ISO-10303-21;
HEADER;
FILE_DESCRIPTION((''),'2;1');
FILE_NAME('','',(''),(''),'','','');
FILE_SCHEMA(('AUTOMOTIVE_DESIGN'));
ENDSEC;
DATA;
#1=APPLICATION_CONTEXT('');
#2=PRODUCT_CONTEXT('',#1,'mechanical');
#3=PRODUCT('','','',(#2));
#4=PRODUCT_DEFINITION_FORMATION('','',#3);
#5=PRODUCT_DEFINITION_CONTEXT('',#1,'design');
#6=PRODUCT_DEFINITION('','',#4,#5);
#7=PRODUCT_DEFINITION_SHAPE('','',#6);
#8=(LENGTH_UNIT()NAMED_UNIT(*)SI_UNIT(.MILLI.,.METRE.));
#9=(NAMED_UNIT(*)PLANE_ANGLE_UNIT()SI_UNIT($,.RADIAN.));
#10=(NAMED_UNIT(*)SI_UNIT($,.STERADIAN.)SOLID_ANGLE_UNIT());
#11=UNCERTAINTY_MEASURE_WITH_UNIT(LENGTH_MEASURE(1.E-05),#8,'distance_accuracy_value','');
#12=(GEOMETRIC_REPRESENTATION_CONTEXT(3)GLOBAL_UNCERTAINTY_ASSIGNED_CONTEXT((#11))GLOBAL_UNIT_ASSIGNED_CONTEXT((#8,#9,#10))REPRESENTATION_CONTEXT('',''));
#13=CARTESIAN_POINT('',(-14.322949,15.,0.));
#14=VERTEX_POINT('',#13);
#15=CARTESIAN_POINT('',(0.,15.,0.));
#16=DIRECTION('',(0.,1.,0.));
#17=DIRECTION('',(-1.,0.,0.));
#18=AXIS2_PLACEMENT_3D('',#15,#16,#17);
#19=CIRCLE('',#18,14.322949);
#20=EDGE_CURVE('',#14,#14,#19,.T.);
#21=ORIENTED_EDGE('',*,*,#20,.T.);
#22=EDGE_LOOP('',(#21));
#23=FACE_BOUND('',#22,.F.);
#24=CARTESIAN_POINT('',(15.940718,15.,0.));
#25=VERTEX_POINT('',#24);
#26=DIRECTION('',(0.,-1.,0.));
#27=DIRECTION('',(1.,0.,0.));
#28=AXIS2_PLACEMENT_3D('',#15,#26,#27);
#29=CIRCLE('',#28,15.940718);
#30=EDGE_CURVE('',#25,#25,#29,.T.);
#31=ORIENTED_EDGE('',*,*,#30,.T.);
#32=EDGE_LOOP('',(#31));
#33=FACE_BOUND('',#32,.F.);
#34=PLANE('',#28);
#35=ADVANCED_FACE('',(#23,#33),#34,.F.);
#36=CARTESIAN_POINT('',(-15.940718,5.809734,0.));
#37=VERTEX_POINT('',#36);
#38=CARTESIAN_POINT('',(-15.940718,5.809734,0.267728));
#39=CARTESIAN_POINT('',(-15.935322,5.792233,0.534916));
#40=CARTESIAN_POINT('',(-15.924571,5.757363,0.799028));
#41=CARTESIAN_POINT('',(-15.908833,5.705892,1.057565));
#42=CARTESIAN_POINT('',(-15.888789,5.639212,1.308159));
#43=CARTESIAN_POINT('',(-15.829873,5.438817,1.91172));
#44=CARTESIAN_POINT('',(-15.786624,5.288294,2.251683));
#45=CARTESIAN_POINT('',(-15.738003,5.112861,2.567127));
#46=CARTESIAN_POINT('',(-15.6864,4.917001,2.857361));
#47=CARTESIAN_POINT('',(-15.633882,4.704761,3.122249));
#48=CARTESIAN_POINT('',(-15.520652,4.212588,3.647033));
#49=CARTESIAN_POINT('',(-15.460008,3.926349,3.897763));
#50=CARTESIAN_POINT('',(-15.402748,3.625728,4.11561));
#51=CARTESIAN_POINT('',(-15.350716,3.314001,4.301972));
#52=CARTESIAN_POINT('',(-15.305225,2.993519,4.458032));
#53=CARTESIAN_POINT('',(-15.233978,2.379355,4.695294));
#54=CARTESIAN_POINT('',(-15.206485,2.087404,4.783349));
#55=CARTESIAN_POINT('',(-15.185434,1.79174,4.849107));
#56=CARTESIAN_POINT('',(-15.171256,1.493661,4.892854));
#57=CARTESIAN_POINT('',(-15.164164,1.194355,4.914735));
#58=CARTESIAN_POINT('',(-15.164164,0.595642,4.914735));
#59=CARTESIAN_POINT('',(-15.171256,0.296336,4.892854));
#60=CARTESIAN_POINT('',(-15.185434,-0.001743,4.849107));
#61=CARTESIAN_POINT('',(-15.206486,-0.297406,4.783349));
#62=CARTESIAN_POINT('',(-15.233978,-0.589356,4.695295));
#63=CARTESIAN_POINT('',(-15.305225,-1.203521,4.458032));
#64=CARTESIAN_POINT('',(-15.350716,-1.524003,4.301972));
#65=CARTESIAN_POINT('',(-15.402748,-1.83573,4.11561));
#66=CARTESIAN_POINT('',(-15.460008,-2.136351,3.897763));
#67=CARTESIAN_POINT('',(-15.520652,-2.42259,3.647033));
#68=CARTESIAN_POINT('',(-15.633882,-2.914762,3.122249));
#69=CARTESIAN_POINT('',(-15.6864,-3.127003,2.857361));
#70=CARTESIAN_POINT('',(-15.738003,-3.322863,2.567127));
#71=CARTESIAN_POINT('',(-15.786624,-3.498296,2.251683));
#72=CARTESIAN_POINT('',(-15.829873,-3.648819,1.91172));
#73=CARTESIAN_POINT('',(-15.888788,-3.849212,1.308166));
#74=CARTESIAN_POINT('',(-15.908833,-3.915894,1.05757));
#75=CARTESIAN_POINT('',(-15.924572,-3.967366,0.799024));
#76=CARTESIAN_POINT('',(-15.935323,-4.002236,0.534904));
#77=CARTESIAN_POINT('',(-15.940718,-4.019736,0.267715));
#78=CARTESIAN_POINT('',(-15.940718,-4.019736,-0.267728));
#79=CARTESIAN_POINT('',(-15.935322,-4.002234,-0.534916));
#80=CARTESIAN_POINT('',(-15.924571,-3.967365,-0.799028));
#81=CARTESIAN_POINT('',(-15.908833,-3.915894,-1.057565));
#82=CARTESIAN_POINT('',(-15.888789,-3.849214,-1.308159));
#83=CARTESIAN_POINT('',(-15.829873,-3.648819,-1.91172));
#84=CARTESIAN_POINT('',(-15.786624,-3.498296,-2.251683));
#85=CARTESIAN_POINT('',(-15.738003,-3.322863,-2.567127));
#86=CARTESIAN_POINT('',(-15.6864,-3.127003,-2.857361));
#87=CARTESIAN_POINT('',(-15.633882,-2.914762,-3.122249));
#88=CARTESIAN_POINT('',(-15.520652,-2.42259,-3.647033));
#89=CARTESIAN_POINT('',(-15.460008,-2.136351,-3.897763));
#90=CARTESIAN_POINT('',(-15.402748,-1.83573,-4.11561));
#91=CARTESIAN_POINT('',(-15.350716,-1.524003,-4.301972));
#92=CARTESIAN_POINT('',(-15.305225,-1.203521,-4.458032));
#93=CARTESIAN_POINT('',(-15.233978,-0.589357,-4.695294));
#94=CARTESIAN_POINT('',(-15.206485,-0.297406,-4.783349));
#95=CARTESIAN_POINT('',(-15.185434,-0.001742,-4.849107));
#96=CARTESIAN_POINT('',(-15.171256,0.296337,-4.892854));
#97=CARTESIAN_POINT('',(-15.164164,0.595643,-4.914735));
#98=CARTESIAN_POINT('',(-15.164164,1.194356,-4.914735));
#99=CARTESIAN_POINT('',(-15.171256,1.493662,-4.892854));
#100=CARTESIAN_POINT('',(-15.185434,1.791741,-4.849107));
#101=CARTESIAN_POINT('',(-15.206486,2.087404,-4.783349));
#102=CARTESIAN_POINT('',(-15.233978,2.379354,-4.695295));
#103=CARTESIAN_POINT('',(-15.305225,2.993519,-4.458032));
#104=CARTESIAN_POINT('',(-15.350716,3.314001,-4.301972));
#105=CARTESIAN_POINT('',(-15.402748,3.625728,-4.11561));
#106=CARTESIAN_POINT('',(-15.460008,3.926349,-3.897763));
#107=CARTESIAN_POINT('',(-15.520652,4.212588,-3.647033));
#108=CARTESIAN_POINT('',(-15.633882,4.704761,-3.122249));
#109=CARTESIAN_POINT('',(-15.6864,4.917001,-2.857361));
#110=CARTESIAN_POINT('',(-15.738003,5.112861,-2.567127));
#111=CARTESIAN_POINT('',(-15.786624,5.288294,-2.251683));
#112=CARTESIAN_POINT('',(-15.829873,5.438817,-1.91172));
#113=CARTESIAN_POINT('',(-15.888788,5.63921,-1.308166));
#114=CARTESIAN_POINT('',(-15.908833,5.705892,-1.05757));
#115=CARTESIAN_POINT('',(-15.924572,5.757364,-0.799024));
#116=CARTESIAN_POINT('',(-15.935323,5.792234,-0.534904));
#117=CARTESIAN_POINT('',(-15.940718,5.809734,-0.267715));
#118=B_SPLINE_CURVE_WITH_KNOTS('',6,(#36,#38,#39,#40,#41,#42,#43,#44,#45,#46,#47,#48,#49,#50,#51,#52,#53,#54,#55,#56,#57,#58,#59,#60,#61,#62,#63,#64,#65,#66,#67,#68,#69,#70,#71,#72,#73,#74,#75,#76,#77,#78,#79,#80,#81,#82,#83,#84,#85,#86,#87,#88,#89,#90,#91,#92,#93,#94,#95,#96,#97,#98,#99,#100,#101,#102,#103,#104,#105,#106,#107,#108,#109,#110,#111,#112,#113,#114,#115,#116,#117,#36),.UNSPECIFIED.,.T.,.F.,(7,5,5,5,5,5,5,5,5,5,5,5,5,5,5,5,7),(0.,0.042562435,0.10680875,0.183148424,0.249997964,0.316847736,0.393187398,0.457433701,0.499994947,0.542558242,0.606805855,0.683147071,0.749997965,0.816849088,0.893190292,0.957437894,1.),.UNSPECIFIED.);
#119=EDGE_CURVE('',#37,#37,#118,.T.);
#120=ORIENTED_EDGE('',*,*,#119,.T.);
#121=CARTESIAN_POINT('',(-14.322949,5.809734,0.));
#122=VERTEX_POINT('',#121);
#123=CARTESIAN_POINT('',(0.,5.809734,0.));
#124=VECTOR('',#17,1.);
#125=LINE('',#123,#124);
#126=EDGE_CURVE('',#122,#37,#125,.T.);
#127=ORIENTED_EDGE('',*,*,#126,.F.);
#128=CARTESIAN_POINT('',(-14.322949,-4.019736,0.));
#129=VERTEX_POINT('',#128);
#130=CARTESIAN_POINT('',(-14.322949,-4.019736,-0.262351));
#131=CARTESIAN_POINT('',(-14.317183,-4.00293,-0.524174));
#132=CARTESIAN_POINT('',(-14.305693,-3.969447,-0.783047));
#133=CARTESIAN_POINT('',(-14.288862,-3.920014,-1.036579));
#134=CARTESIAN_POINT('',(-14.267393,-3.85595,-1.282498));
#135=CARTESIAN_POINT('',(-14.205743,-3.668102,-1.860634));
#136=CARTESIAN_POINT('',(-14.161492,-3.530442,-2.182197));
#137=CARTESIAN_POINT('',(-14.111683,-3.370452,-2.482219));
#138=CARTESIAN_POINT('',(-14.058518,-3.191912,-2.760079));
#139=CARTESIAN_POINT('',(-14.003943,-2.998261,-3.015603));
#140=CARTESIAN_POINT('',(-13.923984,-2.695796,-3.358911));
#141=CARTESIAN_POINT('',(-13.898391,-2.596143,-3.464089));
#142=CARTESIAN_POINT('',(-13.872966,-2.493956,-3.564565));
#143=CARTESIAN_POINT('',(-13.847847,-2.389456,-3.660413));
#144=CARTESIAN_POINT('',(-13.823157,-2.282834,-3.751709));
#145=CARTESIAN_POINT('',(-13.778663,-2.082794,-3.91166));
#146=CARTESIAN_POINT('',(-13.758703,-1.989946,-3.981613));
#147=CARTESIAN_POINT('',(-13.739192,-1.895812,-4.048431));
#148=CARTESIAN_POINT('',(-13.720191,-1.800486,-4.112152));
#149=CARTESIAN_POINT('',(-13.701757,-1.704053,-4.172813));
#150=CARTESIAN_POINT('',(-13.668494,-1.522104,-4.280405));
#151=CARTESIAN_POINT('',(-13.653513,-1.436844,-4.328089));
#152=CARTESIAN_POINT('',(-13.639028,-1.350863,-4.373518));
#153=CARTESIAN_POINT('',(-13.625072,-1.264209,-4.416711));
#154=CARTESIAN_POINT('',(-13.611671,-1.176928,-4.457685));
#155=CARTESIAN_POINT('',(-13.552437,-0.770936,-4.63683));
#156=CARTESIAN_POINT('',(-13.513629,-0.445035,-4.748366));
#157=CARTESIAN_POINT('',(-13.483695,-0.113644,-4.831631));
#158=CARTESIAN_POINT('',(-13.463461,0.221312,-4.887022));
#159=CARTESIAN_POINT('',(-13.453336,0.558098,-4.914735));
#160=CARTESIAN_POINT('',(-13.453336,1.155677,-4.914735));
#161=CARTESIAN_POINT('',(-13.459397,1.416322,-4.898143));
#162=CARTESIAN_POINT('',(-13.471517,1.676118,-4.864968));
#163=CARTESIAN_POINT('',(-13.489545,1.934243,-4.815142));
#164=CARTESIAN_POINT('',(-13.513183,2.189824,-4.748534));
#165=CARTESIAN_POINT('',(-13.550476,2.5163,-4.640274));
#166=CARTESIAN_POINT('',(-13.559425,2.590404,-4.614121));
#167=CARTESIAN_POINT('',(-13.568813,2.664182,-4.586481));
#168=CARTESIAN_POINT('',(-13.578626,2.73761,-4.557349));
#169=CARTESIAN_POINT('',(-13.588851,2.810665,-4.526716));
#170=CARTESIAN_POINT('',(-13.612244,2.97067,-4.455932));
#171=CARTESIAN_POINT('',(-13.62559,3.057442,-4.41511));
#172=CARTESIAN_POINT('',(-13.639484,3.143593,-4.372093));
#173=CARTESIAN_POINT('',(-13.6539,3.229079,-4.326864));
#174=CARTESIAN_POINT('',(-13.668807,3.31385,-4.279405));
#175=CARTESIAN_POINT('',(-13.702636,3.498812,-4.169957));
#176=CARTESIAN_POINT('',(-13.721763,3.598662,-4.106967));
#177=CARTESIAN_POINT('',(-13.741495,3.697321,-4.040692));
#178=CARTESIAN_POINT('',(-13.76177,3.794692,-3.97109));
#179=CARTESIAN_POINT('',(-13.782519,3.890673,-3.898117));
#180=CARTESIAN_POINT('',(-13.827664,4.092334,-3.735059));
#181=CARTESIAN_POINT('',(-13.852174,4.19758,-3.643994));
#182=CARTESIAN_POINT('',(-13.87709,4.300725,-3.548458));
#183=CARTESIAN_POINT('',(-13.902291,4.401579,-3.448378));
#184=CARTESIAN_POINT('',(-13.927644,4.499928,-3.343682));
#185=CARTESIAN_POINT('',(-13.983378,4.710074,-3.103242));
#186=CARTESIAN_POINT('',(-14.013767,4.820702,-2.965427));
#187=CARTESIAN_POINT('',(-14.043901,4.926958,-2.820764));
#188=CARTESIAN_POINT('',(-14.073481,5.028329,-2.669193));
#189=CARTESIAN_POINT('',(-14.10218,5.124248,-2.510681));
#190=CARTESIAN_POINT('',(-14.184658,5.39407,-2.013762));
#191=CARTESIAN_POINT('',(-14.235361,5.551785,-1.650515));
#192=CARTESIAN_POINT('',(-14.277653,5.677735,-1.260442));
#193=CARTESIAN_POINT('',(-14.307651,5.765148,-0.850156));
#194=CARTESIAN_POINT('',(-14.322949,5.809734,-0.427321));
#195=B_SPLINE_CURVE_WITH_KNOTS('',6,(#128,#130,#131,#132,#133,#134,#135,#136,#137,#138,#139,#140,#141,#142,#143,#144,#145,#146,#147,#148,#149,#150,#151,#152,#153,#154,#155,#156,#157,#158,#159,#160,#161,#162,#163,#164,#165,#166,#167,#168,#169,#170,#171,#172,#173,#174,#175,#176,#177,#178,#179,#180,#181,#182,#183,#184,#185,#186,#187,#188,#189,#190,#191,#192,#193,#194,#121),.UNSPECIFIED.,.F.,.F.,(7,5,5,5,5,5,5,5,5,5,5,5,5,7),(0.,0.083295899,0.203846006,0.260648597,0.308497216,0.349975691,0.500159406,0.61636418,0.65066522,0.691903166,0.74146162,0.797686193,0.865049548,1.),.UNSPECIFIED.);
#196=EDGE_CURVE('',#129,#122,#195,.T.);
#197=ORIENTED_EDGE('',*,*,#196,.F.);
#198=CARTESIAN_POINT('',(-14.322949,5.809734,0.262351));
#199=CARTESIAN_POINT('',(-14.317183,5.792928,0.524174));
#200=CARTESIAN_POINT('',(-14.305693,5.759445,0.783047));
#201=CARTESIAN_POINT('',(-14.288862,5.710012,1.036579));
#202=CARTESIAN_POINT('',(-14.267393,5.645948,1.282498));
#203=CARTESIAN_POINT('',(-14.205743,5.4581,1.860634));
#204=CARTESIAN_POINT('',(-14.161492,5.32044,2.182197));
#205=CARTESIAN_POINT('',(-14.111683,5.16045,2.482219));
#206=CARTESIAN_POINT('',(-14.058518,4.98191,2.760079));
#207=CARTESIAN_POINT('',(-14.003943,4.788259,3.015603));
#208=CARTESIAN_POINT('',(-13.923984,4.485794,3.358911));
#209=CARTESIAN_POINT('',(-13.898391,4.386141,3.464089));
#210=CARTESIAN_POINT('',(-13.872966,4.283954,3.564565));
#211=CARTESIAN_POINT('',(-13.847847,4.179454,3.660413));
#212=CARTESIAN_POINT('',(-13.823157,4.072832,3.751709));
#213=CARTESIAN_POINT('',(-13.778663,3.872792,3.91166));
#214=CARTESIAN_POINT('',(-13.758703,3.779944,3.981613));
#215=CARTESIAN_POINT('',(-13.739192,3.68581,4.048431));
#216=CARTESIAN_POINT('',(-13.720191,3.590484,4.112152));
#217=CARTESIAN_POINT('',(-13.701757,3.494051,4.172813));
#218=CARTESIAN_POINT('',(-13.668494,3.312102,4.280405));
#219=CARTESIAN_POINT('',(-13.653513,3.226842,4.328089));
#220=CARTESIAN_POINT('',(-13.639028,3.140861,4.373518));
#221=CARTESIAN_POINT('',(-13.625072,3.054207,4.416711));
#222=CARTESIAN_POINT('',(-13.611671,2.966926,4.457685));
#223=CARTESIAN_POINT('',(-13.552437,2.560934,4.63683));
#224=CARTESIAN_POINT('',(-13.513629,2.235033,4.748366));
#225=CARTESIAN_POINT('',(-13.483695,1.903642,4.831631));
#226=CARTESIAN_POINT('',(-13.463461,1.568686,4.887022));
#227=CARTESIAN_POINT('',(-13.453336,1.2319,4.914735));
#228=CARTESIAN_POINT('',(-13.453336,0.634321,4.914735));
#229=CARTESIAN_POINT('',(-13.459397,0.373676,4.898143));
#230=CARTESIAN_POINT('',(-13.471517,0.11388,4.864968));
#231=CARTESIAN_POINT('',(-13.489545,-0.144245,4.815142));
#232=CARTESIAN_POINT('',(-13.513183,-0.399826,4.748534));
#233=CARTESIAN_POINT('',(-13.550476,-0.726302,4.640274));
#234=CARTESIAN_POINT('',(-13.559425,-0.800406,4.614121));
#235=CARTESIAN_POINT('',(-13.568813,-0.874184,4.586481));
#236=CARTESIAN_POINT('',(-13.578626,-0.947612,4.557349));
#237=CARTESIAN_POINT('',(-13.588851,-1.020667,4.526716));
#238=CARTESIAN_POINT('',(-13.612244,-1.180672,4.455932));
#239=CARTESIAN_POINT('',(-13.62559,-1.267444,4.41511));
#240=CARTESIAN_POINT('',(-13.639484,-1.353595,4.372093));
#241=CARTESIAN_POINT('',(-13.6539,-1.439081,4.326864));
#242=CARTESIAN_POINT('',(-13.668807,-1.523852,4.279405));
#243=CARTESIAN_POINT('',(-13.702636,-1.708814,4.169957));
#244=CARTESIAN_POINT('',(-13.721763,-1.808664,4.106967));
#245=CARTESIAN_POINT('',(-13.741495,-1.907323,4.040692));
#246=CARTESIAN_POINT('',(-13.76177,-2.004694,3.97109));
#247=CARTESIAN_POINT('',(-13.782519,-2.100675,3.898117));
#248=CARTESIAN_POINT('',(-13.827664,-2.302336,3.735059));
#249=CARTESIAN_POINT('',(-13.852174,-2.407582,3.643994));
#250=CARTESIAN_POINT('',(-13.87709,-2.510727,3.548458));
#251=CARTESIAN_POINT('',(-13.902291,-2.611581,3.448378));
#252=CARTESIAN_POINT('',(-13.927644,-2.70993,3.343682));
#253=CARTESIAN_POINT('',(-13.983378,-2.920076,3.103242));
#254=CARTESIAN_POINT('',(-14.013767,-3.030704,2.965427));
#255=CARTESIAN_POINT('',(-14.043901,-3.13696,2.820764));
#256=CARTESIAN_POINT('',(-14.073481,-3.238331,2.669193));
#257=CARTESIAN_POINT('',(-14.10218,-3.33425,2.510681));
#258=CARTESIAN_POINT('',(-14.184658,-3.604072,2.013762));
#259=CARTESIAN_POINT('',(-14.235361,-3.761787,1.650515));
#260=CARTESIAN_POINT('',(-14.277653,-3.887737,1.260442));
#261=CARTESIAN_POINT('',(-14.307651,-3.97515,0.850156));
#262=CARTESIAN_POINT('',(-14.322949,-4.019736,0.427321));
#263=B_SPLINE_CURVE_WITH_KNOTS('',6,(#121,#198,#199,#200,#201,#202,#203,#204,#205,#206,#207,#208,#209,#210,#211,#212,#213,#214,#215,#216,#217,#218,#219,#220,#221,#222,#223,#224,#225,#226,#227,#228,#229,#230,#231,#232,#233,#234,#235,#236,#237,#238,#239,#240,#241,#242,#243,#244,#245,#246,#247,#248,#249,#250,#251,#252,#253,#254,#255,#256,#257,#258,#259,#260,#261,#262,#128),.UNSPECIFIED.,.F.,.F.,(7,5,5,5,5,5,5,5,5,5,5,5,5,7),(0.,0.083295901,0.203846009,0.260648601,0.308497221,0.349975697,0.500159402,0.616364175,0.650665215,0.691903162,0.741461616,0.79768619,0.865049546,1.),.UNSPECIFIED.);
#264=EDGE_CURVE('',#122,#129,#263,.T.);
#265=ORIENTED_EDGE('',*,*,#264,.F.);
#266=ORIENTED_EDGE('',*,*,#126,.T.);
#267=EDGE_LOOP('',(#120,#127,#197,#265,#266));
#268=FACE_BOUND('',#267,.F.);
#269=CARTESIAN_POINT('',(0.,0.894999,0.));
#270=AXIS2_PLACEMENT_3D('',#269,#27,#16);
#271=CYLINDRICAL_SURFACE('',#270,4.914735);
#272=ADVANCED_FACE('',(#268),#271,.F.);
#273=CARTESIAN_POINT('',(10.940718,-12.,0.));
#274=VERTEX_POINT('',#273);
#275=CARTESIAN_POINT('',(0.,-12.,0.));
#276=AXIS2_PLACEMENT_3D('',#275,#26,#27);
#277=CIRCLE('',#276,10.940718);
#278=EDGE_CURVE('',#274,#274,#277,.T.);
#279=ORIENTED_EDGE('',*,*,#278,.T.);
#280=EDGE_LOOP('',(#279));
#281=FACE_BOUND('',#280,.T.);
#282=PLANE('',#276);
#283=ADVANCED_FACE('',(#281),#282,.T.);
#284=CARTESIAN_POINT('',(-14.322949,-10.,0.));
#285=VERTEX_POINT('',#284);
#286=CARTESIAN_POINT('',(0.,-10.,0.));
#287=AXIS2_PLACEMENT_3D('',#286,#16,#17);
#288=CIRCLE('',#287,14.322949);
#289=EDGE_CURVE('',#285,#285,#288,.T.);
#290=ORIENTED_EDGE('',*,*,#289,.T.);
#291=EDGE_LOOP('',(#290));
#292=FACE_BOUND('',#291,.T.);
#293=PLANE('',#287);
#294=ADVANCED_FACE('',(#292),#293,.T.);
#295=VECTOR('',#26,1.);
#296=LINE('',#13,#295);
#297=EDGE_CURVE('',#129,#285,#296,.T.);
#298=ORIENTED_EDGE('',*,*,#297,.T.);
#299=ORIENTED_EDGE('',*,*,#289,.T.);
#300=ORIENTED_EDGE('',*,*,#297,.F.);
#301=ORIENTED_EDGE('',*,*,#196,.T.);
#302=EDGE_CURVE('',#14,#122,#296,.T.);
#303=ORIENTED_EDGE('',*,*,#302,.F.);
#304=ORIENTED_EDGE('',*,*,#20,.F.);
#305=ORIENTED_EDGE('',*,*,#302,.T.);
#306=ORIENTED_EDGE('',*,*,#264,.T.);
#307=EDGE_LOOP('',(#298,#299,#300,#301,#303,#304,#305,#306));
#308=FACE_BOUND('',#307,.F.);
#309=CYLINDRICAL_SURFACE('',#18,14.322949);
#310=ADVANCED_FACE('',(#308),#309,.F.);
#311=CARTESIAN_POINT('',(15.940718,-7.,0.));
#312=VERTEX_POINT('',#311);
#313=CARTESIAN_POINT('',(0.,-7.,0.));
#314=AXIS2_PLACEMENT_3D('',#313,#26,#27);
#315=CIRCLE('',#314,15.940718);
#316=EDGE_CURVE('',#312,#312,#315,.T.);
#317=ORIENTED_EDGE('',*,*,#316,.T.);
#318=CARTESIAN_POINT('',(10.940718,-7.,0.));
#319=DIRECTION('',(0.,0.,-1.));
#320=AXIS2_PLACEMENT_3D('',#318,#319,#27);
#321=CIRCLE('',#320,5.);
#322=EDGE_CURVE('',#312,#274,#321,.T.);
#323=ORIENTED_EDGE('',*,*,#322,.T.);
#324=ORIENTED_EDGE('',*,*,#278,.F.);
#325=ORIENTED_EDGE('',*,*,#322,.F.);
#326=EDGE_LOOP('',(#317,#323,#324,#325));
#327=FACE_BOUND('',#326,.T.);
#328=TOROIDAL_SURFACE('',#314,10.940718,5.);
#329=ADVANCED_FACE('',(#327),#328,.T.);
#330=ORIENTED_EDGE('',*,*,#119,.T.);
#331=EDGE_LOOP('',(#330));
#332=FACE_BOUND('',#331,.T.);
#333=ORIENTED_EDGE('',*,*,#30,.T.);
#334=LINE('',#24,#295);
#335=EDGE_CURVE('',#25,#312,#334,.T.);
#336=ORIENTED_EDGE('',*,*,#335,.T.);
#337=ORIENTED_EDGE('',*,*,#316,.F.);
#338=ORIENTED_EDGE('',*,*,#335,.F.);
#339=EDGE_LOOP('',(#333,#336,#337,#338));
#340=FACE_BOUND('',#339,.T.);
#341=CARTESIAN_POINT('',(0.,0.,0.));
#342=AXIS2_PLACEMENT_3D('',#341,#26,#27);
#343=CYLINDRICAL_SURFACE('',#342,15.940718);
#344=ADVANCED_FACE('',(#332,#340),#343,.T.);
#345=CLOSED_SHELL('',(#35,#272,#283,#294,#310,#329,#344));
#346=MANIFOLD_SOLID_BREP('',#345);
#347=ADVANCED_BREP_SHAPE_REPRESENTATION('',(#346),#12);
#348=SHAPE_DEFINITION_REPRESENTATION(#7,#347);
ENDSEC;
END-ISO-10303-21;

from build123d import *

# Parameters (mm, degrees)
F0_R     = 15.9407183273
F2_DEPTH = 12
F1_R     = 14
F3_DEPTH = 53
F4_DEPTH = 15
F5_R     = 14.3229491525
F6_DEPTH = 25
F7_R     = 5
F8_R     = 4.9147347868
F9_DEPTH = 15.9417183273


# Not quite as in the source:
# - an extrude ends at something that could not be found from the text; its depth is read off the source's solid


with BuildPart() as f2:
    # F0 (on Front) → F2 (new body)
    with BuildSketch(Plane.XZ):
        Circle(F0_R)
    extrude(amount=F2_DEPTH)

    # F1 (on face) → F3 (cut, through all)
    with BuildSketch(Plane.XZ):
        Circle(F1_R)
    extrude(amount=-F3_DEPTH, mode=Mode.SUBTRACT)

    # F4 (add): a face of the model
    f4_faces = [f2.faces().sort_by_distance(p)[0] for p in [
        (0, 0, 0),
    ]]
    extrude(f4_faces, amount=F4_DEPTH)

    # F5 (on face) → F6 (cut)
    with BuildSketch(Plane(origin=(0, 15, 0), x_dir=(-1, 0, 0), z_dir=(0, 1, 0))):
        Circle(F5_R)
    extrude(amount=-F6_DEPTH, mode=Mode.SUBTRACT)

    # F7
    f7_edges = [f2.edges().sort_by_distance(p)[0] for p in [
        (-15.940718, -12, 0),
    ]]
    fillet(f7_edges, radius=F7_R)

    # F8 (on Right) → F9 (cut, through all)
    with BuildSketch(Plane.YZ):
        with Locations((0.8949990151, 0)):
            Circle(F8_R)
    extrude(amount=-F9_DEPTH, mode=Mode.SUBTRACT)


solid = f2.part
